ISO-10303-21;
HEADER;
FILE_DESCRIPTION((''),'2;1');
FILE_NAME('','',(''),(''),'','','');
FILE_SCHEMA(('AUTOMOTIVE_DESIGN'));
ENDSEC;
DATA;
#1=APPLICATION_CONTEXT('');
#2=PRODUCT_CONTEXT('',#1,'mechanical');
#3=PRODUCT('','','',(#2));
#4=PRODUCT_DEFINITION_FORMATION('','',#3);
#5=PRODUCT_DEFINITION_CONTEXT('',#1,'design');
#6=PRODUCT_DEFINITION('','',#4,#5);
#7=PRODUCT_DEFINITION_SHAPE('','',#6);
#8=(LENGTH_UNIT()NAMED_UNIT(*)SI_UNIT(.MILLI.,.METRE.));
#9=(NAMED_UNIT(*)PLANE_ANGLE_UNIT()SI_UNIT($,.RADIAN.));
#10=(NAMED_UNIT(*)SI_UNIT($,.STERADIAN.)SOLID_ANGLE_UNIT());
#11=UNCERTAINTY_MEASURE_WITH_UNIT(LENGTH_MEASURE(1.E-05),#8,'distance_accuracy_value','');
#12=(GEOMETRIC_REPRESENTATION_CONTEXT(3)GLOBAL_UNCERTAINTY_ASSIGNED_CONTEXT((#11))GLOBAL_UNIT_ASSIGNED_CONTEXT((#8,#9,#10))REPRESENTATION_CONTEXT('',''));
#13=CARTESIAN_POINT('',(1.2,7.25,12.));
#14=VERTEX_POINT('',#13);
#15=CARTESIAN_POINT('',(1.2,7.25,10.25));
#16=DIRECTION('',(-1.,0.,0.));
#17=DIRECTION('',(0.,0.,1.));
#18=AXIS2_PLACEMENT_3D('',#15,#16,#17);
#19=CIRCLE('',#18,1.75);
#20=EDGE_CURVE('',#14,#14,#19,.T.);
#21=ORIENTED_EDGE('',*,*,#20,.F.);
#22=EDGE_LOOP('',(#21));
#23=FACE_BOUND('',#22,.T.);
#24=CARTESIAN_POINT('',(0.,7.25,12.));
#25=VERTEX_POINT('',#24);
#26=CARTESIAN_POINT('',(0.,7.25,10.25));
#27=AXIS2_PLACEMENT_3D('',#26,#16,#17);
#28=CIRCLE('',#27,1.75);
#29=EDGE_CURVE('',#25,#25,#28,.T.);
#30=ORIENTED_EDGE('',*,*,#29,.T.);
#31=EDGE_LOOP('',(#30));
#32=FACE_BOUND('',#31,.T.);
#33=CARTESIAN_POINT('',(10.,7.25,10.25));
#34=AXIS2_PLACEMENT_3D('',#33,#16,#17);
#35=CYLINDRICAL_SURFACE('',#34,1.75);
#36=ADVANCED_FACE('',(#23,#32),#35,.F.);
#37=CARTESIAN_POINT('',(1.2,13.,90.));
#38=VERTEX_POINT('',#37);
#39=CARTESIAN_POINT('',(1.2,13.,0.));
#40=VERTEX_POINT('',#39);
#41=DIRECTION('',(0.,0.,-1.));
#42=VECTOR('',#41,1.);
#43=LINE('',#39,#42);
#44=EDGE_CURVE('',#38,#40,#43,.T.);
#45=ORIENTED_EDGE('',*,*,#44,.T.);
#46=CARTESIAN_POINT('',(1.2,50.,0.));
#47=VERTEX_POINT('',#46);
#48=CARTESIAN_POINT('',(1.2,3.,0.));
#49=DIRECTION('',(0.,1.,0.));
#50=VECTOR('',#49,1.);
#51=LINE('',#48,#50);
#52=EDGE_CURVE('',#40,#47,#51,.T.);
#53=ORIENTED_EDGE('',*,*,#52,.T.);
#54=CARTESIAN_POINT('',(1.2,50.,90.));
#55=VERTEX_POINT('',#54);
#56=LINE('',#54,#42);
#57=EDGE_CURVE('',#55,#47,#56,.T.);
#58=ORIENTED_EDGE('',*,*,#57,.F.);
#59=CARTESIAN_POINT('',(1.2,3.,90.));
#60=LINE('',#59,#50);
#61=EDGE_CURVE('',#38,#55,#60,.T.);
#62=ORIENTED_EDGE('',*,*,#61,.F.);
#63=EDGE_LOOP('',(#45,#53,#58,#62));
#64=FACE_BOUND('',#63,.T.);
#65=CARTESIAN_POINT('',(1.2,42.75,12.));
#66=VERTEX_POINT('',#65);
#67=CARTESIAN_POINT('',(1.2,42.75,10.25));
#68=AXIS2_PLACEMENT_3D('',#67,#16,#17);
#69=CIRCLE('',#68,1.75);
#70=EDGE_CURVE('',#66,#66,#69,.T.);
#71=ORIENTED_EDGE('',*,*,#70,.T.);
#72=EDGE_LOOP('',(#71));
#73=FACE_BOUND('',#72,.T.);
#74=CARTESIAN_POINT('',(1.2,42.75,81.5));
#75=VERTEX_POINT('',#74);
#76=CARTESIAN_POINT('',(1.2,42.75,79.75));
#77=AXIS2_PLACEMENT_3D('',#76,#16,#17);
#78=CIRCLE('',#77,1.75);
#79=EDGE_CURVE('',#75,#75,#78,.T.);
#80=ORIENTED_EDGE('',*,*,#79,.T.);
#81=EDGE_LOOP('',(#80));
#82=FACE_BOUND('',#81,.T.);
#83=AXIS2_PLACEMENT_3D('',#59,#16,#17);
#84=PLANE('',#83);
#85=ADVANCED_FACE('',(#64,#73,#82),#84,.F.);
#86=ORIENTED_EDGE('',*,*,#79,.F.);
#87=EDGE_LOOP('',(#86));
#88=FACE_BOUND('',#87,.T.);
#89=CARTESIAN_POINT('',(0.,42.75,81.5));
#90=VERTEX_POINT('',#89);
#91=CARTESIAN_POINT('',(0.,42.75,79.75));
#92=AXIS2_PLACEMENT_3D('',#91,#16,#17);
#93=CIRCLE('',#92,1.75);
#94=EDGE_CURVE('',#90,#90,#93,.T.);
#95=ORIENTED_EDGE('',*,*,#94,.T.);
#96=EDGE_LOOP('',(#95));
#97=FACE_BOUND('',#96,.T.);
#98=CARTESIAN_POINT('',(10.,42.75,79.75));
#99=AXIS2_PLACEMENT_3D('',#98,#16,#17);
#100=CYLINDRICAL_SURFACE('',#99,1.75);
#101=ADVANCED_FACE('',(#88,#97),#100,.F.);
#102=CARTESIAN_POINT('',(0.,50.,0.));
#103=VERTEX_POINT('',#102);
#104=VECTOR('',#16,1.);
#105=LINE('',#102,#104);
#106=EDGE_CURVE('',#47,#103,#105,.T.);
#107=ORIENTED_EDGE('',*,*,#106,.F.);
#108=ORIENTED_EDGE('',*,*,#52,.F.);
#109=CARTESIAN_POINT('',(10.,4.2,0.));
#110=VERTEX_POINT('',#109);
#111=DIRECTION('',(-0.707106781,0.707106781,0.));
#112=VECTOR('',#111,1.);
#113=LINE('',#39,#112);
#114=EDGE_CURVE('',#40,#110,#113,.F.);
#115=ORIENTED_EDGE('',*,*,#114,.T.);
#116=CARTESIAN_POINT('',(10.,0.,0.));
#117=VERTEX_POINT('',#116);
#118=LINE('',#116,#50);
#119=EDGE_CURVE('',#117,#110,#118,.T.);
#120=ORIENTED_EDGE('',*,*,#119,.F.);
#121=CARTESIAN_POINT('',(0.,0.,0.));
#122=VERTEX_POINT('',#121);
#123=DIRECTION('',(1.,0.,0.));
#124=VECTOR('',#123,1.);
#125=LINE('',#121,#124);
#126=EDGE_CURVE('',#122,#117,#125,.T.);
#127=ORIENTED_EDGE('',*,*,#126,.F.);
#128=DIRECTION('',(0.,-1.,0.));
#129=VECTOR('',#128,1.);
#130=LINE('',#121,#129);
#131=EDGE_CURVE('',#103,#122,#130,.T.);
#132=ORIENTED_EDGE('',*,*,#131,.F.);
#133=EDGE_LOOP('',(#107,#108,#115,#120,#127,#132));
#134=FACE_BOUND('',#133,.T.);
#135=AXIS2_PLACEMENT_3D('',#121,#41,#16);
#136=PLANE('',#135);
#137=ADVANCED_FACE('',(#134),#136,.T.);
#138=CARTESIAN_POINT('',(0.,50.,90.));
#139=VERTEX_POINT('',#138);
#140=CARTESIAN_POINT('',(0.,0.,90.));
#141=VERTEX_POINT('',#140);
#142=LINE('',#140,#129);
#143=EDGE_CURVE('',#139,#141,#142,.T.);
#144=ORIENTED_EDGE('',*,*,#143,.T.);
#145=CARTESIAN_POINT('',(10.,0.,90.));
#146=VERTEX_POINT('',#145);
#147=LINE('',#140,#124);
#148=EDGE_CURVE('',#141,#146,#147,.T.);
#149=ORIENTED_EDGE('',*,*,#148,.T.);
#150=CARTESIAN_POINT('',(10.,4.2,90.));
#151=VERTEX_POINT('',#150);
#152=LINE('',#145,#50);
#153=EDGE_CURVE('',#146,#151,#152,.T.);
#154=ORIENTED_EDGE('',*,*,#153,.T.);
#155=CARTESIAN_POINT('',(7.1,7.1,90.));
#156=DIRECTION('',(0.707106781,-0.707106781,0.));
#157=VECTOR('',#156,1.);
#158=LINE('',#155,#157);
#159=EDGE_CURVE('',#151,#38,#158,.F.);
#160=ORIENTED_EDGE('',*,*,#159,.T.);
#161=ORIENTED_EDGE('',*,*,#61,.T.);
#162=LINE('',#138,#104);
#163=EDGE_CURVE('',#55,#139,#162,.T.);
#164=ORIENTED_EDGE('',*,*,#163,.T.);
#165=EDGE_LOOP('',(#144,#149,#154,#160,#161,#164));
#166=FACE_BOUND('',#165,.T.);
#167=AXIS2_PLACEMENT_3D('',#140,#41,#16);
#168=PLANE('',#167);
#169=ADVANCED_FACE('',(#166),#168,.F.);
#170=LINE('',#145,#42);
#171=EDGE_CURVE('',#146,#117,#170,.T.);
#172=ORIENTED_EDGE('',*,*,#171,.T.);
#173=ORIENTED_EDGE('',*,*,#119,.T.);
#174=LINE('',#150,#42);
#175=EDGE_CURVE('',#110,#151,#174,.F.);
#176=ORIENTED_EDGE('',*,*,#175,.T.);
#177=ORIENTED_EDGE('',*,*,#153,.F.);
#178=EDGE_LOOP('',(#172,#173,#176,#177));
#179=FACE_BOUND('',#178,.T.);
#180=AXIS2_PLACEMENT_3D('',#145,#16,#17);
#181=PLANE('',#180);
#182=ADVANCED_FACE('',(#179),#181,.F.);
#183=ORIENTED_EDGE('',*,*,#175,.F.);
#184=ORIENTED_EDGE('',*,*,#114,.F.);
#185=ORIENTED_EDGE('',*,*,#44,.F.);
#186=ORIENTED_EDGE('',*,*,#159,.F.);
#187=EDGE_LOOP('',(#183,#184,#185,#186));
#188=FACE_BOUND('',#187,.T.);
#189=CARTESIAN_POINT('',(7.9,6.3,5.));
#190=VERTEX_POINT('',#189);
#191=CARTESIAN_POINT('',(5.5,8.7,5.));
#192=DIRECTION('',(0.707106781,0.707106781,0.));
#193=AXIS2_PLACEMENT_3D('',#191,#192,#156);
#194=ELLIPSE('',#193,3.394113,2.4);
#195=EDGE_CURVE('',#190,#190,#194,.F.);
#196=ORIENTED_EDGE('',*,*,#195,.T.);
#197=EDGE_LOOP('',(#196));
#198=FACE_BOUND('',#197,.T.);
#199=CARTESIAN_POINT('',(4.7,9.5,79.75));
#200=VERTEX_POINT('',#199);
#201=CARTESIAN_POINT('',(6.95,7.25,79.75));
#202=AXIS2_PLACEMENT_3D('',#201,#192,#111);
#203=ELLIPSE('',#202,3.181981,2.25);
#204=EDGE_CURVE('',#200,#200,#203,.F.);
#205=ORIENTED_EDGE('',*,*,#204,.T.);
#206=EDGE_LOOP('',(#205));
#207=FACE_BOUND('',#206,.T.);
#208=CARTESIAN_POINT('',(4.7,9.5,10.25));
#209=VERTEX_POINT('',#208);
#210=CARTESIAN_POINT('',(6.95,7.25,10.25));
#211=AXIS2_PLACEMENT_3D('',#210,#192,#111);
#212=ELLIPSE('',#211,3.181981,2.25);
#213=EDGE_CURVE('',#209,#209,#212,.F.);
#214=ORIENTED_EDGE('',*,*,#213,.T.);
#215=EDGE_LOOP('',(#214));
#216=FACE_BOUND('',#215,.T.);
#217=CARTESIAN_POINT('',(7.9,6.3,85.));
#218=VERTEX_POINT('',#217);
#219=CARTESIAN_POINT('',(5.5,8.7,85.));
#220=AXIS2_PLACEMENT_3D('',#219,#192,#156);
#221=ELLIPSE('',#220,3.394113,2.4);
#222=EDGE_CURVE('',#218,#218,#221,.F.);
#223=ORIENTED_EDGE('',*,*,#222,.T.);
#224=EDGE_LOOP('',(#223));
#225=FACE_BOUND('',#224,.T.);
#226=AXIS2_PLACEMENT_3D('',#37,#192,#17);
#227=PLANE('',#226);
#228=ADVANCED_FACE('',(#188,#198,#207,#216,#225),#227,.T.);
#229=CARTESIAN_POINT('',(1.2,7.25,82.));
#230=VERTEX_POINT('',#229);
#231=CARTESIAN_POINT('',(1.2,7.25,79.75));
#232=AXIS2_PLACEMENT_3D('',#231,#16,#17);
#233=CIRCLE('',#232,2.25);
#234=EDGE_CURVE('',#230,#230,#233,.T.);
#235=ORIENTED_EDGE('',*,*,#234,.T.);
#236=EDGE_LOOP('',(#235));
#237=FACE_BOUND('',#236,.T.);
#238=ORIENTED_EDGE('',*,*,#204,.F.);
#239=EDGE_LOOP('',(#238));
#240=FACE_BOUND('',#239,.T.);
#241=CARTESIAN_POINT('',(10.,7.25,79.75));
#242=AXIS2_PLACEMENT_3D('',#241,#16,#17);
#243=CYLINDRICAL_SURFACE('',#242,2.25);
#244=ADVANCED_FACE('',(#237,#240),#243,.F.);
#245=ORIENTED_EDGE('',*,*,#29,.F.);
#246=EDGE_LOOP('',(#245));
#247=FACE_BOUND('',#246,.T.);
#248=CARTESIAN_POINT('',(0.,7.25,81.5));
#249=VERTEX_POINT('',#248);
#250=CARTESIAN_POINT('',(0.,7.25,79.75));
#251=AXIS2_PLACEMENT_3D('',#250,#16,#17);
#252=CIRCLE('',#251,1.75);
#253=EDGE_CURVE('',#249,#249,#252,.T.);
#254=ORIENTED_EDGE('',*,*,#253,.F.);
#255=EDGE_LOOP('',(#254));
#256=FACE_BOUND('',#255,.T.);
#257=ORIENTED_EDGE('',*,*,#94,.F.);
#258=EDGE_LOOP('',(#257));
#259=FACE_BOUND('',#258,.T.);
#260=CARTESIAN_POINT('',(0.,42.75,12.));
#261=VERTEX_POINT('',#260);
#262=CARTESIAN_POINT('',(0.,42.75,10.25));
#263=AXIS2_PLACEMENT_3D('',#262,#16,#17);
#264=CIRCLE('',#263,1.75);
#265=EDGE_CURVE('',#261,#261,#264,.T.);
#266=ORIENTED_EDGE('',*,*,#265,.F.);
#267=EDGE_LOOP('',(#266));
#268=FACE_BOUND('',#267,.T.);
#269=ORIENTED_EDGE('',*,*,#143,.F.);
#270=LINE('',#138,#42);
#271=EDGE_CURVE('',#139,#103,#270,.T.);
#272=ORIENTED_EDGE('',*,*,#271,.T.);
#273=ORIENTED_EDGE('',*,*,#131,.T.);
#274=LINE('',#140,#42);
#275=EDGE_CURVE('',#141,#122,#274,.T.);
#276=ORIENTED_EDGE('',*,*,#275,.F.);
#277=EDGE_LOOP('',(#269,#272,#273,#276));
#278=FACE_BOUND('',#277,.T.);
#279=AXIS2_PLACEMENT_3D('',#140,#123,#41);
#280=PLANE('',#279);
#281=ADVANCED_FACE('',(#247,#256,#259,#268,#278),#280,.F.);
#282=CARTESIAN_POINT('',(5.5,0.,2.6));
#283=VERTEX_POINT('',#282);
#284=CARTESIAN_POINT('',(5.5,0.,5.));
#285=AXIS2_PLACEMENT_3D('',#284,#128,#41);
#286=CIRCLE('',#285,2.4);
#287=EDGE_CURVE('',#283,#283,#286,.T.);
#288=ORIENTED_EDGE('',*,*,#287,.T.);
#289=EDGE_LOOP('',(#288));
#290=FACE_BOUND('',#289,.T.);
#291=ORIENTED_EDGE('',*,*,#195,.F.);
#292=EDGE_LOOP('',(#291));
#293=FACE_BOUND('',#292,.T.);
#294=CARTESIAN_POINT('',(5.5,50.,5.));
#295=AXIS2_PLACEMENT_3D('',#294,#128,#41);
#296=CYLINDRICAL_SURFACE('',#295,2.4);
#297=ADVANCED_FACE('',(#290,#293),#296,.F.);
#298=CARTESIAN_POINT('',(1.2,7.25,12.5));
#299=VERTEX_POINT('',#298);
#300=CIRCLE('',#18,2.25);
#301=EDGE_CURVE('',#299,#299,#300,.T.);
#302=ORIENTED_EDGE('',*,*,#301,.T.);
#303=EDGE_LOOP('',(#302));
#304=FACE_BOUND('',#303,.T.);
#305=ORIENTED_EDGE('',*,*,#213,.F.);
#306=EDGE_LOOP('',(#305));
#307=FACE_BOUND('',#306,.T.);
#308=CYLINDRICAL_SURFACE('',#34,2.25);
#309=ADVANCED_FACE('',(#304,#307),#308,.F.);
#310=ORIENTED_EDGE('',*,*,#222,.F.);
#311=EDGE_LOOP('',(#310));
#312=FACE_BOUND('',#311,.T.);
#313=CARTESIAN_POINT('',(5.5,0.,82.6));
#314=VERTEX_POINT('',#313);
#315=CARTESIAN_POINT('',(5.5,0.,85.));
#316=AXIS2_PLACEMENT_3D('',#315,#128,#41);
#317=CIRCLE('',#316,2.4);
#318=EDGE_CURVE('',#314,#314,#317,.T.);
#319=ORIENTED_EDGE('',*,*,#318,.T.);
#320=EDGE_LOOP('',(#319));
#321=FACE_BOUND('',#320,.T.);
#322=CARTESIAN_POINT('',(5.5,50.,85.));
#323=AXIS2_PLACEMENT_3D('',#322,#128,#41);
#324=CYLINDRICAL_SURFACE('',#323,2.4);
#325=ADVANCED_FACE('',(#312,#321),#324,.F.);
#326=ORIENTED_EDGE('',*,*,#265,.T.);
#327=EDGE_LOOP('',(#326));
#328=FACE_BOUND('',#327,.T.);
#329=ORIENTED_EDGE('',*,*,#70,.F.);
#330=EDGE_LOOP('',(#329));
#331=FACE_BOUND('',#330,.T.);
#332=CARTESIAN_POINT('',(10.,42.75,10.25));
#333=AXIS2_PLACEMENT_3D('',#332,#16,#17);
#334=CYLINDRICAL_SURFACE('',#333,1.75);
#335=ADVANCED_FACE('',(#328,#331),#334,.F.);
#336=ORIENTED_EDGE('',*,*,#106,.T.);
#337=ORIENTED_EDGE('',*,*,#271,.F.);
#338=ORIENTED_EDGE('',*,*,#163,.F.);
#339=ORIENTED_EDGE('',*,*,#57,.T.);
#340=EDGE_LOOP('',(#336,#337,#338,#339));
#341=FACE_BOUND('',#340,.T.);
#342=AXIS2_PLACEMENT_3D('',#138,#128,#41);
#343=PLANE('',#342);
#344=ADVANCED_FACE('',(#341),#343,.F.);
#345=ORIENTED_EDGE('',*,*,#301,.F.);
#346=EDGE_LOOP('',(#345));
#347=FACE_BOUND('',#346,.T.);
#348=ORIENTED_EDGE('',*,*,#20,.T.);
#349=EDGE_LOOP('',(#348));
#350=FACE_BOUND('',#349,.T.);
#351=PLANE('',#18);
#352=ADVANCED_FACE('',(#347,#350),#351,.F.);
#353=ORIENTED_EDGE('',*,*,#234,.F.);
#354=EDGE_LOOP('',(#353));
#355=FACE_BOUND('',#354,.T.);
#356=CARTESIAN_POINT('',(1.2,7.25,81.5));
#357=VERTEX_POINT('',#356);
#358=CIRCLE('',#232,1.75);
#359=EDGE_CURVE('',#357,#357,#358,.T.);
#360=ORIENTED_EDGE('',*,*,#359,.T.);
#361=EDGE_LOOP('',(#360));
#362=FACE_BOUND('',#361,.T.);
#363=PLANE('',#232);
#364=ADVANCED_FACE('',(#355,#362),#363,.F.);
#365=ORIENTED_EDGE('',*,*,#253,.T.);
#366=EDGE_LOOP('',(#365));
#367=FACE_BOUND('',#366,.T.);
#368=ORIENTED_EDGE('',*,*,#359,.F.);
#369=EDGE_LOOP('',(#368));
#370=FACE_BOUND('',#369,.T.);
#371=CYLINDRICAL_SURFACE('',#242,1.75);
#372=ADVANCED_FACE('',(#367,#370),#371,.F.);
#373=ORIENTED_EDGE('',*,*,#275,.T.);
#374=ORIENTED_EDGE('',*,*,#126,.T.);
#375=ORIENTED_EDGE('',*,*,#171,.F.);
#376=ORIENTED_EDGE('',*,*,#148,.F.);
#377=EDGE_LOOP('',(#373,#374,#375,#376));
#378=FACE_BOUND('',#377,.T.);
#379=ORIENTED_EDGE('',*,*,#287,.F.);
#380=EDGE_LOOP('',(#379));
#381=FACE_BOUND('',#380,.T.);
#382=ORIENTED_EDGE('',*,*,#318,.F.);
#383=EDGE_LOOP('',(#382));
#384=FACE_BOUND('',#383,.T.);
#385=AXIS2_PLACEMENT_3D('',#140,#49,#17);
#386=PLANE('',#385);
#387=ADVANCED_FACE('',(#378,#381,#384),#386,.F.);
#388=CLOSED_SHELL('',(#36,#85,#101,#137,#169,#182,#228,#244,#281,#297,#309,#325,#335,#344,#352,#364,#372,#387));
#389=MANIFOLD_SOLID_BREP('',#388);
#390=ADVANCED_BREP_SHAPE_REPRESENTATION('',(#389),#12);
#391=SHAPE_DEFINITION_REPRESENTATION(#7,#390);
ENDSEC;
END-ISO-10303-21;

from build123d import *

# Parameters (mm, degrees)
BOSS_EXTRU_4_DEPTH      = 90
ESQUISSE8_R             = 1.75
ENL_V_MAT_EXTRU_5_DEPTH = 104.440804328
ESQUISSE9_R             = 2.4
ENL_V_MAT_EXTRU_6_DEPTH = 104.440804328
CONG_7_SIZE             = 10
ENL_V_START             = -1.2
ESQUISSE10_R            = 2.25
ESQUISSE10_R_2          = 1.75
ENL_V_MAT_EXTRU_7_DEPTH = 103.240804328


with BuildPart() as part:
    # Esquisse7 → Boss.-Extru.4 (new body)
    with BuildSketch(Plane.XY):
        Polygon((0, 0), (10, 0), (10, 3), (1.2, 3), (1.2, 50), (0, 50), align=None)
    extrude(amount=BOSS_EXTRU_4_DEPTH)

    # Esquisse8 → Enlèv. mat.-Extru.5 (cut, through all)
    with BuildSketch(Plane.ZY):
        with Locations((10.25, 42.75)):
            Circle(ESQUISSE8_R)
        with Locations((10.25, 7.25)):
            Circle(ESQUISSE8_R)
        with Locations((79.75, 7.25)):
            Circle(ESQUISSE8_R)
        with Locations((79.75, 42.75)):
            Circle(ESQUISSE8_R)
    extrude(amount=-ENL_V_MAT_EXTRU_5_DEPTH, mode=Mode.SUBTRACT)

    # Esquisse9 → Enlèv. mat.-Extru.6 (cut, through all)
    with BuildSketch(Plane.XZ):
        with Locations(Location((5.5, 85, 0), (0, 0, 270))):
            Circle(ESQUISSE9_R)
        with Locations(Location((5.5, 5, 0), (0, 0, 270))):
            Circle(ESQUISSE9_R)
    extrude(amount=-ENL_V_MAT_EXTRU_6_DEPTH, mode=Mode.SUBTRACT)

    # Congé7
    # the kernel refuses this chamfer: 10 mm, written as the material it adds along each edge
    with BuildSketch(Plane(origin=(1.2, 3, 0), x_dir=(0.9996219169112968, -0.02749587661058636, 0), z_dir=(0, 0, 1))) as cong_7_piece_1_section:
        Polygon((CONG_7_SIZE * 0.999621916911, CONG_7_SIZE * 0.0274958766106), (-CONG_7_SIZE * 0.0274958766106, CONG_7_SIZE * 0.999621916911), (0, 0), align=None)
    cong_7_piece_1 = extrude(amount=90, mode=Mode.PRIVATE)
    cong_7_piece_1 = split(cong_7_piece_1, bisect_by=Plane(origin=(10, 6.380086708, 44.999999953), z_dir=(-1, 0, 0)), keep=Keep.TOP, mode=Mode.PRIVATE)
    cong_7_piece_1 = cong_7_piece_1 - Plane(origin=(5.5, 6.380086708, 85), x_dir=(0, 0, -1), z_dir=(0, -1, 0)) * Cylinder(2.4, 220, mode=Mode.PRIVATE)
    cong_7_piece_1 = cong_7_piece_1 - Plane(origin=(5.5, 6.380086708, 5), x_dir=(0, 0, -1), z_dir=(0, -1, 0)) * Cylinder(2.4, 220, mode=Mode.PRIVATE)
    cong_7_piece_1 = cong_7_piece_1 - Plane(origin=(4.314878847, 7.25, 79.75), x_dir=(0, 0, 1), z_dir=(-1, 0, 0)) * Cylinder(1.75, 220, mode=Mode.PRIVATE)
    cong_7_piece_1 = cong_7_piece_1 - Plane(origin=(4.314878847, 7.25, 10.25), x_dir=(0, 0, 1), z_dir=(-1, 0, 0)) * Cylinder(1.75, 220, mode=Mode.PRIVATE)
    add(cong_7_piece_1)

    # Esquisse10 → Enlèv. mat.-Extru.7 (cut, through all)
    # profile 1 of 2: a face of its own
    with BuildSketch(Plane.ZY.offset(ENL_V_START)):
        with Locations((10.25, 7.25)):
            Circle(ESQUISSE10_R)
        with Locations((10.25, 7.25)):
            Circle(ESQUISSE10_R_2, mode=Mode.SUBTRACT)
    # profile 2 of 2: a face of its own
    with BuildSketch(Plane.ZY.offset(ENL_V_START)):
        with Locations((79.75, 7.25)):
            Circle(ESQUISSE10_R)
        with Locations((79.75, 7.25)):
            Circle(ESQUISSE10_R_2, mode=Mode.SUBTRACT)
    extrude(amount=-ENL_V_MAT_EXTRU_7_DEPTH, mode=Mode.SUBTRACT)


solid = part.part
